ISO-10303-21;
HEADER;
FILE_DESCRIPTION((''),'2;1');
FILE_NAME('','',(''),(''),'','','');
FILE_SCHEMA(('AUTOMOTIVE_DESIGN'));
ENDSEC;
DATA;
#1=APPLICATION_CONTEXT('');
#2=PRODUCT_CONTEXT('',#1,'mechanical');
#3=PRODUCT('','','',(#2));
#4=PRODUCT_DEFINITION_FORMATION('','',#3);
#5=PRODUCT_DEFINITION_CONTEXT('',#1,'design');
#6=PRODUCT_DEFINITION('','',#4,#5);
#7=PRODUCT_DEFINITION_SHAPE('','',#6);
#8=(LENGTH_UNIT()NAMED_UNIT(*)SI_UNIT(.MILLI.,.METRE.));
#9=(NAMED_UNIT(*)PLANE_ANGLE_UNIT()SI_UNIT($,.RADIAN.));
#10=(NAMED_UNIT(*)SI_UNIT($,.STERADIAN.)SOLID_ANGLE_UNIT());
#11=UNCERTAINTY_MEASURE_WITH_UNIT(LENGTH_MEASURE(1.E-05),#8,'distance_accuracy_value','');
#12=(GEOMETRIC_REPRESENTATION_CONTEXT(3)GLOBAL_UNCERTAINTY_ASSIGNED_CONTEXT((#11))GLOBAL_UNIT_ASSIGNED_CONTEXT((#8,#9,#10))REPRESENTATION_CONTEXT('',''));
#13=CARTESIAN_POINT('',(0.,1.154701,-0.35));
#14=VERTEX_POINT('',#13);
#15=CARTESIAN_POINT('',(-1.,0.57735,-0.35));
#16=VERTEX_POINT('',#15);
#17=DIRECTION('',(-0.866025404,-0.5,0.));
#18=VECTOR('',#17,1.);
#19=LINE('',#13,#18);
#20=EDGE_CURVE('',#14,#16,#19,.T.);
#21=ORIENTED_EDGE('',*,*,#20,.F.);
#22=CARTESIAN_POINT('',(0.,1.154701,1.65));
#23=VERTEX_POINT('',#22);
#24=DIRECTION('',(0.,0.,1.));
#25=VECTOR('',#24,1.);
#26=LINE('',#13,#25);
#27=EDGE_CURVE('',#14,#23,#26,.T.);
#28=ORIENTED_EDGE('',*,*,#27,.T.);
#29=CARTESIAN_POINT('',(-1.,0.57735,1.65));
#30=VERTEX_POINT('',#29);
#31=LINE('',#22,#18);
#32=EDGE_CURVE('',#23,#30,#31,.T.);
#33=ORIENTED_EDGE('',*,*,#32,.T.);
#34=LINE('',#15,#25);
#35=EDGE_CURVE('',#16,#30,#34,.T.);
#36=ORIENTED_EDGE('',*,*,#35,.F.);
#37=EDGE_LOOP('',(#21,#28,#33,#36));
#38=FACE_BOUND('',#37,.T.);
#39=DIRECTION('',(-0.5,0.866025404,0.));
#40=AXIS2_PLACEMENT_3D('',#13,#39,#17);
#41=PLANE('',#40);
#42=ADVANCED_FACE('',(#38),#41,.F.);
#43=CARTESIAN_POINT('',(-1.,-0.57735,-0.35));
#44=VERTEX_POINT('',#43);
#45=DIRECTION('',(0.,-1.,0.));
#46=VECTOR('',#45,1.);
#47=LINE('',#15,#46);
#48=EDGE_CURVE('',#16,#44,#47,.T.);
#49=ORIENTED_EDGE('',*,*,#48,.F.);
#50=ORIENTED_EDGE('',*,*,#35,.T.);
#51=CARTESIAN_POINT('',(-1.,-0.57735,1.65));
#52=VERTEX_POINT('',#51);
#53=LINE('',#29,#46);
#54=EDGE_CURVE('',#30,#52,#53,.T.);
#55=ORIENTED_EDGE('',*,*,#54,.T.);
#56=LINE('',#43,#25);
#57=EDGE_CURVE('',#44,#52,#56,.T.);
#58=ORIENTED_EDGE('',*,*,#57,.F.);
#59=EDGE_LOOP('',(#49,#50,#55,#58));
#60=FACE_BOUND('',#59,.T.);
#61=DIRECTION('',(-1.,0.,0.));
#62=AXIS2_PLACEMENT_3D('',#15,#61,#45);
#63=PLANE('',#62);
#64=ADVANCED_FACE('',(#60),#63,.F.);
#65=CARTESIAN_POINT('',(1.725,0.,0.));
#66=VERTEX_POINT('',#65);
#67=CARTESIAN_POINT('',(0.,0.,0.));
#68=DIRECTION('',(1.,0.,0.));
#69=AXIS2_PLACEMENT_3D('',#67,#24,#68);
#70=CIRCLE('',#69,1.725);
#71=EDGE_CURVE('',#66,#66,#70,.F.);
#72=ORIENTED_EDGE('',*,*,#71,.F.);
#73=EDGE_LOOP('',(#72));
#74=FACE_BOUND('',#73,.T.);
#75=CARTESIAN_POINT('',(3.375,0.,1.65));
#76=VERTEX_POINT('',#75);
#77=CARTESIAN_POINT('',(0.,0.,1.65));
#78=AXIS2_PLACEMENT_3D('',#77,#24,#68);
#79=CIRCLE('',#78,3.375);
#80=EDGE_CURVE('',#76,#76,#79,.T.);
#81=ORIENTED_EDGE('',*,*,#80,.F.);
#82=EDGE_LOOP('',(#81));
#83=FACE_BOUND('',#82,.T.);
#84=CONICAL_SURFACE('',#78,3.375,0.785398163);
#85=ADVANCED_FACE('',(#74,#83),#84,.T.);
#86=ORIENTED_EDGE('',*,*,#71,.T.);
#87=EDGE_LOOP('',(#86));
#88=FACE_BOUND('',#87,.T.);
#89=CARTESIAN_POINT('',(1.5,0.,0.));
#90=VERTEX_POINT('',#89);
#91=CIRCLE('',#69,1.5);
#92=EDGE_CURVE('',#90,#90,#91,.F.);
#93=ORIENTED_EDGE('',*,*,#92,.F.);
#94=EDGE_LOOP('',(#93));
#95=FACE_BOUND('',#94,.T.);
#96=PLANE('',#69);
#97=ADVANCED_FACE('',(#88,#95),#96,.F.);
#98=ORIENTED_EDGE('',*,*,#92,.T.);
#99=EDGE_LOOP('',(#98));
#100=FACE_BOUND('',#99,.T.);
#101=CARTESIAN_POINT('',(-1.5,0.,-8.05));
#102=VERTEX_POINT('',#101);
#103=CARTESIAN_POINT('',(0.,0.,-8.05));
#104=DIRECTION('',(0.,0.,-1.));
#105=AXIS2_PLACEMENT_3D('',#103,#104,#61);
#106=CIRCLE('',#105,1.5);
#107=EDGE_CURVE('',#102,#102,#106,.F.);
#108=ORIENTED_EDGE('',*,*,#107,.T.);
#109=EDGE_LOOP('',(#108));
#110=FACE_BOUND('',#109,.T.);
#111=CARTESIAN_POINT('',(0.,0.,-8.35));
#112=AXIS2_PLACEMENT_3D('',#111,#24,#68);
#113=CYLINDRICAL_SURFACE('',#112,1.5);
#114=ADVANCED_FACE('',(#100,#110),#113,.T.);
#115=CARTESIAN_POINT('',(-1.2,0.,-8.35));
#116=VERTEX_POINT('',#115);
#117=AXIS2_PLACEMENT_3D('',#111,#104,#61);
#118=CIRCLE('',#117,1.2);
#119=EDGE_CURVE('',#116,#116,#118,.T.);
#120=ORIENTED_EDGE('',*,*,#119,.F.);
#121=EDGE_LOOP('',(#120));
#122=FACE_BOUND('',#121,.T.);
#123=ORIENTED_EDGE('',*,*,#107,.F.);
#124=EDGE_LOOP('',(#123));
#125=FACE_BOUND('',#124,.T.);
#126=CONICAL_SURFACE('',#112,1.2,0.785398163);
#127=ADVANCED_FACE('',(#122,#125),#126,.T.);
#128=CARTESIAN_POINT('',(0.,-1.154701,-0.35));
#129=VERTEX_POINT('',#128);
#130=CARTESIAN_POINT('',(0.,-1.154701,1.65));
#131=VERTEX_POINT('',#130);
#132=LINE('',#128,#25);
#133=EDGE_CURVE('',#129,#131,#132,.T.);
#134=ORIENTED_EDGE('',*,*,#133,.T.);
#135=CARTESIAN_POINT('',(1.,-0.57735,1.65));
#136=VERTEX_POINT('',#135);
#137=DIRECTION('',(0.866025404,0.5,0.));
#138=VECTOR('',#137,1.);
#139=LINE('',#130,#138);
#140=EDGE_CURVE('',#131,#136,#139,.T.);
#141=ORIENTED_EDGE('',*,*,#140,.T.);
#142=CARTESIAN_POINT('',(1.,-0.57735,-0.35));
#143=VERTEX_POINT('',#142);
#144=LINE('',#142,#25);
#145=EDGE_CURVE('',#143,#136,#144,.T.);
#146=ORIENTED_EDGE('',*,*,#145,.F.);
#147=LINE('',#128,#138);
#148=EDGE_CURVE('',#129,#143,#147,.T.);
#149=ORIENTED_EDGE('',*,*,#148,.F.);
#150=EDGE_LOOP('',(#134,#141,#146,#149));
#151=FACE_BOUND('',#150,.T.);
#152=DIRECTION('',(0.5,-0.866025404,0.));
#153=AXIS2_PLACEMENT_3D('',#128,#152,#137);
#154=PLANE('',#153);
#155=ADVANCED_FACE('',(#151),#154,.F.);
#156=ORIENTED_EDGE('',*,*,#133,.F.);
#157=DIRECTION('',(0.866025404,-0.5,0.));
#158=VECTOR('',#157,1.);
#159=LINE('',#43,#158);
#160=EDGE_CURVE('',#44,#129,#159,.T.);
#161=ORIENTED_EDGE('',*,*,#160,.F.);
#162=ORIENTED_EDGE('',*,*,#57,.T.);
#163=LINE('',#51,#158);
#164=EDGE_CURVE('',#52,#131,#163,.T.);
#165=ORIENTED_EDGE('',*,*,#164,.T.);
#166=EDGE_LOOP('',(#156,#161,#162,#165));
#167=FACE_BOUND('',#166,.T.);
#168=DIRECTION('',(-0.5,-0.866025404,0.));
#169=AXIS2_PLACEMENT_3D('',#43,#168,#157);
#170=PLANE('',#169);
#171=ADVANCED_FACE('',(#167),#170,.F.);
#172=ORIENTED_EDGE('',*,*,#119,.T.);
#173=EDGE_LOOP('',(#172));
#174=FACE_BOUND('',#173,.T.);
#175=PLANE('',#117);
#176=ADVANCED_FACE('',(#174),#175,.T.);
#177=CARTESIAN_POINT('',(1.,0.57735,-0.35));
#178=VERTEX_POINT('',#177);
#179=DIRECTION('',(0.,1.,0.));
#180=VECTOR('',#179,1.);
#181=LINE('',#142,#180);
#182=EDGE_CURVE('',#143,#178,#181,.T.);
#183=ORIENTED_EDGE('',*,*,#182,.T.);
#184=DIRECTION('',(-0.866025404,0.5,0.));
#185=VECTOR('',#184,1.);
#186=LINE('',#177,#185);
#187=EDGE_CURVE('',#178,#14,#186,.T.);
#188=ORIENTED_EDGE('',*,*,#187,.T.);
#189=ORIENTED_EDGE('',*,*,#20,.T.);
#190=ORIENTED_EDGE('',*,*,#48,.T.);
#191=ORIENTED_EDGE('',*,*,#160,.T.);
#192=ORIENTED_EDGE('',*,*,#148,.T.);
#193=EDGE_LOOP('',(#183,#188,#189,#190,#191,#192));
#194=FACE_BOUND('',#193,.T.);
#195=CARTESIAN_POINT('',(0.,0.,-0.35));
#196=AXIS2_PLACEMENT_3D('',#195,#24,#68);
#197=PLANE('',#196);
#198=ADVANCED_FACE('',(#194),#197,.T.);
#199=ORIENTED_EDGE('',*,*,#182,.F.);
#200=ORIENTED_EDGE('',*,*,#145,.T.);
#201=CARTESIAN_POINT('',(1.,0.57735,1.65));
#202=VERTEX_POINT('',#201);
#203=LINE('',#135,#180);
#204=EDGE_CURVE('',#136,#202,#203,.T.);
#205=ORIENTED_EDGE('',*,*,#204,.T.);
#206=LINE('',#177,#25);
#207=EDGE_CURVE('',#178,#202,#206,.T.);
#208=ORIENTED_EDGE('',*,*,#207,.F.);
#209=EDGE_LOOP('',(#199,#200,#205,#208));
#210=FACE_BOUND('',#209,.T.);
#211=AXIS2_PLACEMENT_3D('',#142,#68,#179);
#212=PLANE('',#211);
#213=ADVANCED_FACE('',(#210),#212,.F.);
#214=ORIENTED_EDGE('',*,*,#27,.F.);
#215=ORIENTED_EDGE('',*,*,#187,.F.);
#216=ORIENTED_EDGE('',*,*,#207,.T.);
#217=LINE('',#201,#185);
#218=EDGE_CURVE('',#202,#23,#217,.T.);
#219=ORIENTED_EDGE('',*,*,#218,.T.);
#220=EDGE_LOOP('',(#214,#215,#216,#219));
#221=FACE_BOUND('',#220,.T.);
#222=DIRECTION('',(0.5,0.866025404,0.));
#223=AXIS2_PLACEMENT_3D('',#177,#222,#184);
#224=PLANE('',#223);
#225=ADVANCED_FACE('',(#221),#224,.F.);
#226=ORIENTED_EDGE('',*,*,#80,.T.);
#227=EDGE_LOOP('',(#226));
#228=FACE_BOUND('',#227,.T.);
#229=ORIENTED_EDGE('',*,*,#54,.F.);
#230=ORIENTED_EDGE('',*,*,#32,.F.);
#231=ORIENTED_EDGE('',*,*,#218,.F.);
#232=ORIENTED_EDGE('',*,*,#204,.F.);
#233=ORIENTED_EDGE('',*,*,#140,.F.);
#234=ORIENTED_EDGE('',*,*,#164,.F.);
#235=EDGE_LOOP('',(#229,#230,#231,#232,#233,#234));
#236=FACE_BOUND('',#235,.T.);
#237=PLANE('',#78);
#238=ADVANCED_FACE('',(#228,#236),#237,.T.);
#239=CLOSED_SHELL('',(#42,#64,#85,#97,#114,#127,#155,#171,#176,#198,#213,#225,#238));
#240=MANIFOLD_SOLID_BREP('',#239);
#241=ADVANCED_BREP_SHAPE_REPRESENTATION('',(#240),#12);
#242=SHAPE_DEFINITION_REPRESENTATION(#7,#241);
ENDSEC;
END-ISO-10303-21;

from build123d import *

# Parameters (mm, degrees)
SKETCH1_R           = 3.375
BOSS_EXTRUDE1_DEPTH = 1.65
SKETCH2_R           = 1.5
BOSS_EXTRUDE2_DEPTH = 8.35
CHAMFER1_SIZE       = 0.3
CUT_EXTRUDE1_DEPTH  = 2
CHAMFER2_SIZE       = 1.65


with BuildPart() as part:
    # Sketch1 → Boss-Extrude1 (new body)
    with BuildSketch(Plane.XY):
        Circle(SKETCH1_R)
    extrude(amount=BOSS_EXTRUDE1_DEPTH)

    # Sketch2 → Boss-Extrude2 (add)
    with BuildSketch(Plane(origin=(0, 0, 0), x_dir=(-1, 0, 0), z_dir=(0, 0, -1))):
        with Locations(Location((0, 0, 0), (0, 0, 180))):
            Circle(SKETCH2_R)
    extrude(amount=BOSS_EXTRUDE2_DEPTH)

    # Chamfer1
    chamfer1_edges = [part.edges().sort_by_distance(p)[0] for p in [
        (-1.5, 0, -8.35),
    ]]
    chamfer(chamfer1_edges, length=CHAMFER1_SIZE)

    # Sketch3 → Cut-Extrude1 (cut)
    with BuildSketch(Plane.XY.offset(1.65)):
        Polygon((0, 1.154700538), (-1, 0.577350269), (-1, -0.577350269), (0, -1.154700538), (1, -0.577350269), (1, 0.577350269), align=None)
    extrude(amount=-CUT_EXTRUDE1_DEPTH, mode=Mode.SUBTRACT)

    # Chamfer2
    chamfer2_edges = [part.edges().sort_by_distance(p)[0] for p in [
        (-3.375, 0, 0),
    ]]
    chamfer(chamfer2_edges, length=CHAMFER2_SIZE - 0.0001)  # a hair under: the kernel refuses the full size


solid = part.part
